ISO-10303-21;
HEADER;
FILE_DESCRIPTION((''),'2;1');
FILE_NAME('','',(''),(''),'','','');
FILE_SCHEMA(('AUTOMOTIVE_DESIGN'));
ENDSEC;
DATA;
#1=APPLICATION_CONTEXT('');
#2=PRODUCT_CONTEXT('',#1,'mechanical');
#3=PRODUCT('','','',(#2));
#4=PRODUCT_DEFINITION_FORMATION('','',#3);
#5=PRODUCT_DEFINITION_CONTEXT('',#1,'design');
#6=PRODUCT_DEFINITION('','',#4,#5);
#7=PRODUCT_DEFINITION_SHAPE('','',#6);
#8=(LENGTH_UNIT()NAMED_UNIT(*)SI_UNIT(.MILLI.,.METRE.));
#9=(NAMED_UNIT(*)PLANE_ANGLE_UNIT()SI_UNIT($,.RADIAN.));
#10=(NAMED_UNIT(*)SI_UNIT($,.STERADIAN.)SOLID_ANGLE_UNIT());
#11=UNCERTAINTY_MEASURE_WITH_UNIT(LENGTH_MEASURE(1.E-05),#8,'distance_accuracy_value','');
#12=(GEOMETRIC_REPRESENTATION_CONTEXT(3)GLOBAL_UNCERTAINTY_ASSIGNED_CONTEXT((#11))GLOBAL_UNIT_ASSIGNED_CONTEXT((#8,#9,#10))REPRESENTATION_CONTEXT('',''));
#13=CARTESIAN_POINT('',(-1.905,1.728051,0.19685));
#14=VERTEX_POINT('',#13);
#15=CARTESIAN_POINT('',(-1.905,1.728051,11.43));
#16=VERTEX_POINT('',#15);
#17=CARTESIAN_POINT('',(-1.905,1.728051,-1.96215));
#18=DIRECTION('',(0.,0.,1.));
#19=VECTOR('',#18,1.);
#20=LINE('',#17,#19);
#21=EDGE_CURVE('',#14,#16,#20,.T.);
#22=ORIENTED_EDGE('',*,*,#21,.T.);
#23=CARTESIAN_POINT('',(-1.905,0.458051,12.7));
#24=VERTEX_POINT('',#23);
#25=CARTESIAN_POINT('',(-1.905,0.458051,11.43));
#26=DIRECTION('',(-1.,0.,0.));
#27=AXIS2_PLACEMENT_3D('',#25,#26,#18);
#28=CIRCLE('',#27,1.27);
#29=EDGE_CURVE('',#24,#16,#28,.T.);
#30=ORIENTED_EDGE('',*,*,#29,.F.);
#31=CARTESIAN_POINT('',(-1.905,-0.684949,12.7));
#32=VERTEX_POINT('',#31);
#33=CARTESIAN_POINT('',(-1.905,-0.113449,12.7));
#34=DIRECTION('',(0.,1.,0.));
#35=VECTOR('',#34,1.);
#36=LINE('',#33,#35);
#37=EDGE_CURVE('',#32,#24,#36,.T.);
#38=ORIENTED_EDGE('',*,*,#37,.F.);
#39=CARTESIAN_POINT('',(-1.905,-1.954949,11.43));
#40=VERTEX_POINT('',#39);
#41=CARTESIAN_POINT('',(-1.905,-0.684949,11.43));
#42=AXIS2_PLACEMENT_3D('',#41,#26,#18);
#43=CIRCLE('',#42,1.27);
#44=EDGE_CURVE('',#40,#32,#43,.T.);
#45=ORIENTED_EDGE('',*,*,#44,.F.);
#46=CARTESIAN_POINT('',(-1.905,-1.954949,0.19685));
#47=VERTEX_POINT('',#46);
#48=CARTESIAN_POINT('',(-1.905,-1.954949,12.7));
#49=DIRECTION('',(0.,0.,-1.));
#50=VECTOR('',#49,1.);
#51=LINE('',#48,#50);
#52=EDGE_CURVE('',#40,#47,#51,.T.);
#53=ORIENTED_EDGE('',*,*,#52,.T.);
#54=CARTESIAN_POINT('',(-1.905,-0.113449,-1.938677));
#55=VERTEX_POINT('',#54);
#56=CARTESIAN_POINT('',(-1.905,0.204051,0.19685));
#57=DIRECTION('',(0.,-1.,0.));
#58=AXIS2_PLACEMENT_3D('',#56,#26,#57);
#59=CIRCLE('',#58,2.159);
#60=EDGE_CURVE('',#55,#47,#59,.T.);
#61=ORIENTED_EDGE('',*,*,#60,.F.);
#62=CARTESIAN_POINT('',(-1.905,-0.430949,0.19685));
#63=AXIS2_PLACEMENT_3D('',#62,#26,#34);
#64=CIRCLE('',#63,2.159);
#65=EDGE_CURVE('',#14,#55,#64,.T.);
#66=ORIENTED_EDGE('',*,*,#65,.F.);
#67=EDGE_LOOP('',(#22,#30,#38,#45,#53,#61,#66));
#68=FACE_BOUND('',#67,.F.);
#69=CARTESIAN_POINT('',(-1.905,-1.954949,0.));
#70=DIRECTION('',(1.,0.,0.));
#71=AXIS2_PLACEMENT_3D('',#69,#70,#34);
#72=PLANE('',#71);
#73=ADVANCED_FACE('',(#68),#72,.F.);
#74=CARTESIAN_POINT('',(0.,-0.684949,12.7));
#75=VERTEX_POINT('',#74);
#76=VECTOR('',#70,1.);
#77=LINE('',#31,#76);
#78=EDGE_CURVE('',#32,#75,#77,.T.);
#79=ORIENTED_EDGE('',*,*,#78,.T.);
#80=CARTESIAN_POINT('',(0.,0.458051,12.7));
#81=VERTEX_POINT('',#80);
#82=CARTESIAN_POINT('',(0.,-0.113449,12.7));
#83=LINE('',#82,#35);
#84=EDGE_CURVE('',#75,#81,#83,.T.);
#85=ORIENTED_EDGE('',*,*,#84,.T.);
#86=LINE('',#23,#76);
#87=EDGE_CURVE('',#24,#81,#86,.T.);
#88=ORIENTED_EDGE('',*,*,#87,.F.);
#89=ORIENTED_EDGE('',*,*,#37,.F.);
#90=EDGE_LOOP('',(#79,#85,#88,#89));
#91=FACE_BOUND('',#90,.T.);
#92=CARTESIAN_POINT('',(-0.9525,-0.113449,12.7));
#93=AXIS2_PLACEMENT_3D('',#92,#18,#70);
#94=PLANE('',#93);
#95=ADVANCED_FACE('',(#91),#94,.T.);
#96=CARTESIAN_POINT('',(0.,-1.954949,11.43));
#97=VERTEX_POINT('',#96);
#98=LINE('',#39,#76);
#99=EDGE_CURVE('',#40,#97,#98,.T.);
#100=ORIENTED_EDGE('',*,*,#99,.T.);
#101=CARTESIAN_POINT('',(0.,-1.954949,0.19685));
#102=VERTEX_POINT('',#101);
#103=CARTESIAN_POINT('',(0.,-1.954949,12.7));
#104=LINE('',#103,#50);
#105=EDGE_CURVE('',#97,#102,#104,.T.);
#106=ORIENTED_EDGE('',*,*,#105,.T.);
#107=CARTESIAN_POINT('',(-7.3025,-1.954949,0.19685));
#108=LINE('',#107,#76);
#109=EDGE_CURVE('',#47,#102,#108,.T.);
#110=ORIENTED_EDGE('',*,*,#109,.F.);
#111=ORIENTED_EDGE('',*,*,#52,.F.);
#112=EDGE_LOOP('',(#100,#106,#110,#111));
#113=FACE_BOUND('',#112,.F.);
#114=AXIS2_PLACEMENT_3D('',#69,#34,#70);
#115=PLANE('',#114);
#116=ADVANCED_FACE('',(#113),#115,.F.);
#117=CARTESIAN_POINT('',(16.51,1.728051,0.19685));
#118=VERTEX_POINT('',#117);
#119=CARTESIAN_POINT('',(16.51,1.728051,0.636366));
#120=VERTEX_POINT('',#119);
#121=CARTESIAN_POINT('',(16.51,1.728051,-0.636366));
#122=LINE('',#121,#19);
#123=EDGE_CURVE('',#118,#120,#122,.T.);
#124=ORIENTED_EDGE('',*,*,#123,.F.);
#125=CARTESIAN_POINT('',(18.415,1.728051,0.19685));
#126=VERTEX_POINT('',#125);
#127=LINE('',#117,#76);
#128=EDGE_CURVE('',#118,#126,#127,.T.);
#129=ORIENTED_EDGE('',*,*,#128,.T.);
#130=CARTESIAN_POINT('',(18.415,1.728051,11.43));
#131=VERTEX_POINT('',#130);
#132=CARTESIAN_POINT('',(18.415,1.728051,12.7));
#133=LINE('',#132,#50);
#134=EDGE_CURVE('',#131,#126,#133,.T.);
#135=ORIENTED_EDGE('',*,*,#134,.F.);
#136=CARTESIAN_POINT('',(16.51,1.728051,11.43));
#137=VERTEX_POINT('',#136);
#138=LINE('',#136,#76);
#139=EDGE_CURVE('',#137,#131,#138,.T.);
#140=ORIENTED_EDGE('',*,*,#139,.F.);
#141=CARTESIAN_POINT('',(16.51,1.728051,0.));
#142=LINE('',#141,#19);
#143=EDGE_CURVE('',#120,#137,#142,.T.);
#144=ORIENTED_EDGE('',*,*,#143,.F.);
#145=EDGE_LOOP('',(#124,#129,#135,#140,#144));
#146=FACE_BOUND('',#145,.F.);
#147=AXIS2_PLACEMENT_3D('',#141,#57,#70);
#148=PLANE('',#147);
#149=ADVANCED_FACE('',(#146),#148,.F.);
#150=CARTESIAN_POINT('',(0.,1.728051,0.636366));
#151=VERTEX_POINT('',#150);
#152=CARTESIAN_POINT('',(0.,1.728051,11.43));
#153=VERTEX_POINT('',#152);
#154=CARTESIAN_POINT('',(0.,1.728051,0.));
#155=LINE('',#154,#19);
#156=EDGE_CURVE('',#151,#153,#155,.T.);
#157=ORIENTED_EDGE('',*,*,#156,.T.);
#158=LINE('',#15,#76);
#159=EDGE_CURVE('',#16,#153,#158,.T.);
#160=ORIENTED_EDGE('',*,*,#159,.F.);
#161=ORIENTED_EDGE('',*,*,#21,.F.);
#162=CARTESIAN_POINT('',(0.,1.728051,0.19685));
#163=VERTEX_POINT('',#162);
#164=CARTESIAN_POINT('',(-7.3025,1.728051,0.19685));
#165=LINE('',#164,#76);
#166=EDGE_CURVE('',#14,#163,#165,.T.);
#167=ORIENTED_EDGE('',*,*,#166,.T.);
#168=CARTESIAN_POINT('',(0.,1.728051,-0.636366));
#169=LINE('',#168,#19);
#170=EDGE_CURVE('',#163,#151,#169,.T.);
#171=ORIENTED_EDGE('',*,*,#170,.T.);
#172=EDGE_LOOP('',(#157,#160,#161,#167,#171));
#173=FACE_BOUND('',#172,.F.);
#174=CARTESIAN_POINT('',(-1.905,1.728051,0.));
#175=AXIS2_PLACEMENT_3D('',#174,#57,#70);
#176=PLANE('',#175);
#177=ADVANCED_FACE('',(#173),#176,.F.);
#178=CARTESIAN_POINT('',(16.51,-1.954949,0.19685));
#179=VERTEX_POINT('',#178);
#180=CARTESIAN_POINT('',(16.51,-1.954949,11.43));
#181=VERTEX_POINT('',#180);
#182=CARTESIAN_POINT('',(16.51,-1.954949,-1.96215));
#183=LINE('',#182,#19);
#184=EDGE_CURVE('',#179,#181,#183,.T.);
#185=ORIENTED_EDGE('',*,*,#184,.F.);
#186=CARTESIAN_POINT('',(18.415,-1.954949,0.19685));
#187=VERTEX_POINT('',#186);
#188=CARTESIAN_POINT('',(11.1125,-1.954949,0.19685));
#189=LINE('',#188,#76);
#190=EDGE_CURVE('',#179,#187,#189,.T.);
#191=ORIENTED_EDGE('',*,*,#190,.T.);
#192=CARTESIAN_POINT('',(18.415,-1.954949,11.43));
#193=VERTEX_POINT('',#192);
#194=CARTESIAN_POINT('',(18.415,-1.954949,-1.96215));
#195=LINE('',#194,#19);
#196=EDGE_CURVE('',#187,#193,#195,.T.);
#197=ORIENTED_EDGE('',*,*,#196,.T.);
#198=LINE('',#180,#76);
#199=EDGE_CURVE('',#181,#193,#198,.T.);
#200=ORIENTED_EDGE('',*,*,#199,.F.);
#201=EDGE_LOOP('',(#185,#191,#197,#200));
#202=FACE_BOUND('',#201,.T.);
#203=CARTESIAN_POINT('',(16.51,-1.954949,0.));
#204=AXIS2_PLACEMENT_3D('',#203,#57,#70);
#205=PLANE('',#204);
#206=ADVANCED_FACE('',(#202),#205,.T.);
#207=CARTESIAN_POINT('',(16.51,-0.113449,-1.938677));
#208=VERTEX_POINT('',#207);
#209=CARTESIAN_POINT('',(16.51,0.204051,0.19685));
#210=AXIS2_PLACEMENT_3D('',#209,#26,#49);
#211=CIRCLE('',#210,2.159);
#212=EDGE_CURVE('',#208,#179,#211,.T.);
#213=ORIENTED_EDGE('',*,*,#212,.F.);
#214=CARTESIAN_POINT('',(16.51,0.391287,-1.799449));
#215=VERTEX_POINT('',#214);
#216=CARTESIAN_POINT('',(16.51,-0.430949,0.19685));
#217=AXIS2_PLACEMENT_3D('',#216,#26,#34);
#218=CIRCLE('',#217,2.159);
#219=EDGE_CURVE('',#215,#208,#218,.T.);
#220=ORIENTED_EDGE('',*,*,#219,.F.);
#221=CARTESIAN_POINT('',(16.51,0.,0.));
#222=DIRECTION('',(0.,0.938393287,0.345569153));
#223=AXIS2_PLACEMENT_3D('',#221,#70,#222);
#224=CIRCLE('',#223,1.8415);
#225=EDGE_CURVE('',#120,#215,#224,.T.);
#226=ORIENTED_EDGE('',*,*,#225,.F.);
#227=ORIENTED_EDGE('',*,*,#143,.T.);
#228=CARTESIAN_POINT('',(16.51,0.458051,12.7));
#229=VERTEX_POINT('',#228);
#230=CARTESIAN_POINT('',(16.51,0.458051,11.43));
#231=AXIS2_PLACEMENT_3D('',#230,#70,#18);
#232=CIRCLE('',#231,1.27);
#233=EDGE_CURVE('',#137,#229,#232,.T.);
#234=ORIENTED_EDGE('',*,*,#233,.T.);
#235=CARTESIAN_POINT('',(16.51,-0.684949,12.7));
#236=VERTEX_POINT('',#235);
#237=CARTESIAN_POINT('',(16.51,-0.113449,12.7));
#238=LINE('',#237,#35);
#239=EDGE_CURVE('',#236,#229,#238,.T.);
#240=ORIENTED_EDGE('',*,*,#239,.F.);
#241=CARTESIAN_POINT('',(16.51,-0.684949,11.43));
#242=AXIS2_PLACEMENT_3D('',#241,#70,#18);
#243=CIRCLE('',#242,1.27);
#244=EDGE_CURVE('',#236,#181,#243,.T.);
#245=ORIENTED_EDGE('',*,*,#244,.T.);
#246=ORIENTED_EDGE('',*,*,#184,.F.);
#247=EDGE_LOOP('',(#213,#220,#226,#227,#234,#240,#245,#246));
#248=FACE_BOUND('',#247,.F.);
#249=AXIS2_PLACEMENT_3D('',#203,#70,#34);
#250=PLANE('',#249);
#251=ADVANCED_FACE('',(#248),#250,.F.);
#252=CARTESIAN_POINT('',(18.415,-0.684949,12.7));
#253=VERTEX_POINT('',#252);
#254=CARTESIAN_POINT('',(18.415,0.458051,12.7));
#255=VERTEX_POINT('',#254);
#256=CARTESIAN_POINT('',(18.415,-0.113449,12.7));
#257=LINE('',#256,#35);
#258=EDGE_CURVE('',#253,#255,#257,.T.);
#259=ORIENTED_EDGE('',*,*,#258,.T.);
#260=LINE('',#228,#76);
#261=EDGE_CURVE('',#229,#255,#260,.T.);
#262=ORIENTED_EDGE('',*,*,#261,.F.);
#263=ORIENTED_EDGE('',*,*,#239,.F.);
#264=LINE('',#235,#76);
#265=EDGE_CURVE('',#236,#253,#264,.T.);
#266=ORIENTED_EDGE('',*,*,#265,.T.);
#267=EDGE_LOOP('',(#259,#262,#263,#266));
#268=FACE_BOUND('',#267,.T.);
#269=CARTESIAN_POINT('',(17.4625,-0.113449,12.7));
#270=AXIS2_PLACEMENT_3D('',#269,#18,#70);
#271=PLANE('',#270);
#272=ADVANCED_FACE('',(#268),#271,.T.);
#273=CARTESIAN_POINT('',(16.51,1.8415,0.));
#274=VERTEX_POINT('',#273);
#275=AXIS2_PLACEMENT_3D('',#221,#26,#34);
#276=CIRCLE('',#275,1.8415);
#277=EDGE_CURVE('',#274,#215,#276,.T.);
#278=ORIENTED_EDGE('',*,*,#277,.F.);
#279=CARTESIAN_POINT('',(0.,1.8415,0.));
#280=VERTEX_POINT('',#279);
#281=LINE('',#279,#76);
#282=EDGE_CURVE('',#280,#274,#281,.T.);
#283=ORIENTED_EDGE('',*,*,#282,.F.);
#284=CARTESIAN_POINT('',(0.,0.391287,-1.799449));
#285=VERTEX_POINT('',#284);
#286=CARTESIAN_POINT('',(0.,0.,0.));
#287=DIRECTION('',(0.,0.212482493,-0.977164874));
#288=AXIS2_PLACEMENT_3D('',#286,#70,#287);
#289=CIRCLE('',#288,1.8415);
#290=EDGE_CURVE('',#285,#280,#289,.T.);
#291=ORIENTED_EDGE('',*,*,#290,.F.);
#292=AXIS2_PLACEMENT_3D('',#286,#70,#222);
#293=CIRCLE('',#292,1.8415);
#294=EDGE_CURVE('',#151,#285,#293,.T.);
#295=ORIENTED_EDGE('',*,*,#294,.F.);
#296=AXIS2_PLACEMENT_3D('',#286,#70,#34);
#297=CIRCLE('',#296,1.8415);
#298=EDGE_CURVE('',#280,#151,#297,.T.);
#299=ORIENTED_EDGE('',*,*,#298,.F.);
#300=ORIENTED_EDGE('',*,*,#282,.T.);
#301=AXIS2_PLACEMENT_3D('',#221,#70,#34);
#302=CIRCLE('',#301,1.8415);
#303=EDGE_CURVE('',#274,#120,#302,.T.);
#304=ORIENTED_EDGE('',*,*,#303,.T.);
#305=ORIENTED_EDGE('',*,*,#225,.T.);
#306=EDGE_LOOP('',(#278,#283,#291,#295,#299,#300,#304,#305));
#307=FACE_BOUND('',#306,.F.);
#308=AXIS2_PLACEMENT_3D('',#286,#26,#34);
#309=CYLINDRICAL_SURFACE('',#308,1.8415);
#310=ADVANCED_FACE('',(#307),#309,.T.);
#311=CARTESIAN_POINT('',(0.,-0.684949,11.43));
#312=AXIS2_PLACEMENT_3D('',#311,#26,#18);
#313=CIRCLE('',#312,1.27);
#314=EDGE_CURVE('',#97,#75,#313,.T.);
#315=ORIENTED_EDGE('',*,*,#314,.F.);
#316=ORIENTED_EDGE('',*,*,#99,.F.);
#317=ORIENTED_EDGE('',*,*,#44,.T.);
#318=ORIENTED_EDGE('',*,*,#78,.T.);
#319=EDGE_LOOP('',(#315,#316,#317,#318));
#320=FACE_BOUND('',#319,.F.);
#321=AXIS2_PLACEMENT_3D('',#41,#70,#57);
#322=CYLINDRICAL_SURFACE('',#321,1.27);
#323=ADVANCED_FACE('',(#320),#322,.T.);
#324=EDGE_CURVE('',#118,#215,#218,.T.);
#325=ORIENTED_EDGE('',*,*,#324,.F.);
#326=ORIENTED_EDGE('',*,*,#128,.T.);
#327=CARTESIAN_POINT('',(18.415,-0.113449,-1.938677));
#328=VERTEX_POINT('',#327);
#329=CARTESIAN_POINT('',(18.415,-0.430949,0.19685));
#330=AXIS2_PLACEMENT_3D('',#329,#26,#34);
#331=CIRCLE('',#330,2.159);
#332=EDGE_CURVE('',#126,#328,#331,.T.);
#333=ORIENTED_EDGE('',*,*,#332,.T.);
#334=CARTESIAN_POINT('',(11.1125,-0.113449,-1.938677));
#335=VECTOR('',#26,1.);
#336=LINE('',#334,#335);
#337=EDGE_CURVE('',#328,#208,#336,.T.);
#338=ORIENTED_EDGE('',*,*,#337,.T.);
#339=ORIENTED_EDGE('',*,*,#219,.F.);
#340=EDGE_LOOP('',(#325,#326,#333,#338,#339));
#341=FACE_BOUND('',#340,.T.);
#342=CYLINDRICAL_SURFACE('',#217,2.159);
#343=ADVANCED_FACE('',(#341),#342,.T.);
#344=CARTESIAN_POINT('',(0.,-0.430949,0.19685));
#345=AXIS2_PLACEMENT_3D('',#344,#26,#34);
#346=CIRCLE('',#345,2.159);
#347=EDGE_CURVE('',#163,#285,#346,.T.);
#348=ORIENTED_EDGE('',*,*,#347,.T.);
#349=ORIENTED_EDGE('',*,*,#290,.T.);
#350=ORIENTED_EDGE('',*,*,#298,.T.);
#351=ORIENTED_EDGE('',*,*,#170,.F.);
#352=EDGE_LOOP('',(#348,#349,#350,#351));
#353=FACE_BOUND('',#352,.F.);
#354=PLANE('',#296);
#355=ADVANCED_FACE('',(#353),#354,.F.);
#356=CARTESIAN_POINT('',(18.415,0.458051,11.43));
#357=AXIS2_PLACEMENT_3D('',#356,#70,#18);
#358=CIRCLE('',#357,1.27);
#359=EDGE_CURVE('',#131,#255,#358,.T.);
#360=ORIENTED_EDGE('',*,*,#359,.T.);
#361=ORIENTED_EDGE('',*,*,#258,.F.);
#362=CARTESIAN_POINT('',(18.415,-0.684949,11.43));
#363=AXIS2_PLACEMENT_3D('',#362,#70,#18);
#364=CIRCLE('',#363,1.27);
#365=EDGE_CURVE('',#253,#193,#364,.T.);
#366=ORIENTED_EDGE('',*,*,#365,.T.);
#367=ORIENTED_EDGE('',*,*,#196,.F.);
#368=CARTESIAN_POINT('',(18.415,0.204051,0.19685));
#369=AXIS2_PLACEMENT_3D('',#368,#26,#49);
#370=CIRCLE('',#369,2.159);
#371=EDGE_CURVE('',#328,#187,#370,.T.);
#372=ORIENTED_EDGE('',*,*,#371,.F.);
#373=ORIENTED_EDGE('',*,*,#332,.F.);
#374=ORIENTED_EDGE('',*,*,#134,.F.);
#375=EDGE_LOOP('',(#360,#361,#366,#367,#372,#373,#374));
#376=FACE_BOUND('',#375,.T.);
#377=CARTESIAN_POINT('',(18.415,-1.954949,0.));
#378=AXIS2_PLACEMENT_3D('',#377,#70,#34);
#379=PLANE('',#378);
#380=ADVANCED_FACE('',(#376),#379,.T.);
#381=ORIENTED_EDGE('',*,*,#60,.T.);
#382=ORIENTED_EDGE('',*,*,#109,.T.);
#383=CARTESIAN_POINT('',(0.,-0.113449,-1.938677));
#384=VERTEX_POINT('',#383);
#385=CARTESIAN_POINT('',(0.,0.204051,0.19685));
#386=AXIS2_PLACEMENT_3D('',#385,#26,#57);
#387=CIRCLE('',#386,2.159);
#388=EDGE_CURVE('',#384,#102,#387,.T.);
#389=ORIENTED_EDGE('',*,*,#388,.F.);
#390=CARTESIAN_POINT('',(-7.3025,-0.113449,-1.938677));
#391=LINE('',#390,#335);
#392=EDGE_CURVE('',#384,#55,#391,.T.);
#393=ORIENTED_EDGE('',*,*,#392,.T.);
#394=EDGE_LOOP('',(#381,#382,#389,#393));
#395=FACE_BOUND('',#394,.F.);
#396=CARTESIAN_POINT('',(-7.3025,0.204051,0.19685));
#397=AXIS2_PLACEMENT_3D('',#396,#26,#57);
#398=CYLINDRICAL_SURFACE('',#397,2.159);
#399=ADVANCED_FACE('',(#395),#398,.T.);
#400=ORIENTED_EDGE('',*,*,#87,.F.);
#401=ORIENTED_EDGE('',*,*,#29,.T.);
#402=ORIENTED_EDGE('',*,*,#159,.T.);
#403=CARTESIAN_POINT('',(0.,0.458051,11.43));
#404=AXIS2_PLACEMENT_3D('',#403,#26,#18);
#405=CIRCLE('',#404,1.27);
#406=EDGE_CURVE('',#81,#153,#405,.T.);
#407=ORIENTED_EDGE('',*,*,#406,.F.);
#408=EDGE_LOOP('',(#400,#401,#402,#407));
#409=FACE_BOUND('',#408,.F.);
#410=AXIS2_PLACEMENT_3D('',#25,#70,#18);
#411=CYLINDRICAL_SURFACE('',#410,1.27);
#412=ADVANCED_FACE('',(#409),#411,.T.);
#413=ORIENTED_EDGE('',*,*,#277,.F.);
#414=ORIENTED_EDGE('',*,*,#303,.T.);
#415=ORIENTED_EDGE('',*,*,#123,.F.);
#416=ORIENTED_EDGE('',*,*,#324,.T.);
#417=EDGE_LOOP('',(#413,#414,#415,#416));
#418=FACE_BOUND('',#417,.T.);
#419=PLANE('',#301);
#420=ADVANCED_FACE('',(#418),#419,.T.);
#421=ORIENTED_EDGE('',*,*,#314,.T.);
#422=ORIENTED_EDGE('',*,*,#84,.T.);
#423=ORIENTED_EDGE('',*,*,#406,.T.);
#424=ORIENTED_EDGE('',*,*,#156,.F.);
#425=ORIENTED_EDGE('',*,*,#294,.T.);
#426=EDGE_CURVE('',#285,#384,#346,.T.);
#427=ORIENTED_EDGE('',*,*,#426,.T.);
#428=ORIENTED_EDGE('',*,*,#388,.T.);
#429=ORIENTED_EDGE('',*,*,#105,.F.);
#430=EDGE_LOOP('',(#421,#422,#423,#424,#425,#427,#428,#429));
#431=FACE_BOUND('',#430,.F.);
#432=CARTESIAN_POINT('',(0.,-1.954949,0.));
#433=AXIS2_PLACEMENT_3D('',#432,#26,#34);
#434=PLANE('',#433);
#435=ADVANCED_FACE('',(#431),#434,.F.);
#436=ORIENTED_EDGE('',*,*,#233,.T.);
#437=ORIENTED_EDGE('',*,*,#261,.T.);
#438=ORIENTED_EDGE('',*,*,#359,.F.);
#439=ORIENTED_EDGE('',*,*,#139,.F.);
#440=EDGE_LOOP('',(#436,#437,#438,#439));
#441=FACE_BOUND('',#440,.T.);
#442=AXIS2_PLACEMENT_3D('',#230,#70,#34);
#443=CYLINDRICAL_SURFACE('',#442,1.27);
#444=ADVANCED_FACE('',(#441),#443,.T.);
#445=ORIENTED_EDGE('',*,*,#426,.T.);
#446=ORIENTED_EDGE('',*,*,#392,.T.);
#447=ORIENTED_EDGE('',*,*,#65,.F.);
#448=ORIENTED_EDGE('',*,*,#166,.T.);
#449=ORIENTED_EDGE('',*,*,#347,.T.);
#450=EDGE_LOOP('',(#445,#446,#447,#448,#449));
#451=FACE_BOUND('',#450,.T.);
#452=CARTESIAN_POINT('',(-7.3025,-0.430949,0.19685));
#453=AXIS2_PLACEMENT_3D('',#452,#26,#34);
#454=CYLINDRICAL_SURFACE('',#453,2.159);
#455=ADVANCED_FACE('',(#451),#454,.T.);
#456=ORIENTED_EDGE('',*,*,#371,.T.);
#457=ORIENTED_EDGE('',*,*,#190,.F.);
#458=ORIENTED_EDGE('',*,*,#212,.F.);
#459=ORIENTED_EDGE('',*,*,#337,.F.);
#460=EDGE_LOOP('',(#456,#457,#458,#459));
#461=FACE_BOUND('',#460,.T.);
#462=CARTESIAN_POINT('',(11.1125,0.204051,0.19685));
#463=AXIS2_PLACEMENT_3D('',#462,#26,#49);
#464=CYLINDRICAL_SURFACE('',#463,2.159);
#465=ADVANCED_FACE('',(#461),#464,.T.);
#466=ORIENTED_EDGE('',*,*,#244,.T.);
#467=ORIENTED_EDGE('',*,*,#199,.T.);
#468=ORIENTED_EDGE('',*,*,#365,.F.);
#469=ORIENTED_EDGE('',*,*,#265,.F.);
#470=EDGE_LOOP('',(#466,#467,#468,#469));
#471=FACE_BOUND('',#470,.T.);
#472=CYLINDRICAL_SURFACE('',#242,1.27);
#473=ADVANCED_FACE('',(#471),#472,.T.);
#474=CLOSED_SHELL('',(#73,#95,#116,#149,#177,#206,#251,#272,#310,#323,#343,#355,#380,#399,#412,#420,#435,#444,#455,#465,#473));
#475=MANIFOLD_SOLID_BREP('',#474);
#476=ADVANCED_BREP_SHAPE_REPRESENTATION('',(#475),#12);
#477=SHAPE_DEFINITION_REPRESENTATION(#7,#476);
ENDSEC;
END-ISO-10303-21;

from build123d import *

# Parameters (mm, degrees)
F0_R          = 1.8415
F1_DEPTH      = 16.51
F2_W          = 1.905
F2_H          = 3.683
F3_DEPTH      = 12.7
F3_DEPTH_BACK = 1.96215
F4_T1_DEPTH   = 12.7
F4_T3_DEPTH   = 7.3025
F4_T5_DEPTH   = 12.7
F4_T7_DEPTH   = 7.3025
F5_R          = 1.27


# Not quite as in the source:
# - a fillet or chamfer that OpenCascade refuses, or shapes differently, is made with other operations: its cross-section is extruded or revolved along the edge and cut away or added


with BuildPart() as f1:
    # F0 (on Right) → F1 (new body)
    with BuildSketch(Plane.YZ):
        Circle(F0_R)
    extrude(amount=F1_DEPTH)

    # F2 (on Top) → F3 (join, two sides)
    with BuildSketch(Plane.XY) as f3_sk:
        with Locations((17.4625, -0.1134487624)):
            Rectangle(F2_W, F2_H)
        with Locations((-0.9525, -0.1134487624)):
            Rectangle(F2_W, F2_H)
    extrude(amount=F3_DEPTH)
    extrude(f3_sk.sketch, amount=-F3_DEPTH_BACK)

    # F4: fillet of radius 2.159 on 4 edges, made by hand

    # F4_s2 → F4_t1 (cut)
    with BuildSketch(Plane.YZ.offset(11.1125)):
        with BuildLine():
            ThreePointArc((0.2040512376, -1.96215), (-1.322592303, -1.3297935406), (-1.9549487624, 0.19685))
            Line((-1.9549487624, 0.19685), (-1.9549487624, -1.96215))
            Line((-1.9549487624, -1.96215), (0.2040512376, -1.96215))
        make_face()
    extrude(amount=F4_T1_DEPTH, mode=Mode.SUBTRACT)

    # F4_s4 → F4_t3 (cut)
    with BuildSketch(Plane.YZ.offset(16.51)):
        with BuildLine():
            ThreePointArc((1.7280512376, 0.19685), (1.0956947782, -1.3297935406), (-0.4309487624, -1.96215))
            Line((-0.4309487624, -1.96215), (1.7280512376, -1.96215))
            Line((1.7280512376, -1.96215), (1.7280512376, 0.19685))
        make_face()
    extrude(amount=F4_T3_DEPTH, mode=Mode.SUBTRACT)

    # F4_s6 → F4_t5 (cut)
    with BuildSketch(Plane.YZ.offset(-7.3025)):
        with BuildLine():
            ThreePointArc((-1.9549487624, 0.19685), (-1.322592303, -1.3297935406), (0.2040512376, -1.96215))
            Line((0.2040512376, -1.96215), (-1.9549487624, -1.96215))
            Line((-1.9549487624, -1.96215), (-1.9549487624, 0.19685))
        make_face()
    extrude(amount=F4_T5_DEPTH, mode=Mode.SUBTRACT)

    # F4_s8 → F4_t7 (cut)
    with BuildSketch(Plane.YZ.offset(-7.3025)):
        with BuildLine():
            ThreePointArc((1.7280512376, 0.19685), (1.0956947782, -1.3297935406), (-0.4309487624, -1.96215))
            Line((-0.4309487624, -1.96215), (1.7280512376, -1.96215))
            Line((1.7280512376, -1.96215), (1.7280512376, 0.19685))
        make_face()
    extrude(amount=F4_T7_DEPTH, mode=Mode.SUBTRACT)

    # F5
    f5_edges = [f1.edges().sort_by_distance(p)[0] for p in [
        (-0.9525, -1.954949, 12.7),
        (-0.9525, 1.728051, 12.7),
        (17.4625, 1.728051, 12.7),
        (17.4625, -1.954949, 12.7),
    ]]
    fillet(f5_edges, radius=F5_R)


solid = f1.part
